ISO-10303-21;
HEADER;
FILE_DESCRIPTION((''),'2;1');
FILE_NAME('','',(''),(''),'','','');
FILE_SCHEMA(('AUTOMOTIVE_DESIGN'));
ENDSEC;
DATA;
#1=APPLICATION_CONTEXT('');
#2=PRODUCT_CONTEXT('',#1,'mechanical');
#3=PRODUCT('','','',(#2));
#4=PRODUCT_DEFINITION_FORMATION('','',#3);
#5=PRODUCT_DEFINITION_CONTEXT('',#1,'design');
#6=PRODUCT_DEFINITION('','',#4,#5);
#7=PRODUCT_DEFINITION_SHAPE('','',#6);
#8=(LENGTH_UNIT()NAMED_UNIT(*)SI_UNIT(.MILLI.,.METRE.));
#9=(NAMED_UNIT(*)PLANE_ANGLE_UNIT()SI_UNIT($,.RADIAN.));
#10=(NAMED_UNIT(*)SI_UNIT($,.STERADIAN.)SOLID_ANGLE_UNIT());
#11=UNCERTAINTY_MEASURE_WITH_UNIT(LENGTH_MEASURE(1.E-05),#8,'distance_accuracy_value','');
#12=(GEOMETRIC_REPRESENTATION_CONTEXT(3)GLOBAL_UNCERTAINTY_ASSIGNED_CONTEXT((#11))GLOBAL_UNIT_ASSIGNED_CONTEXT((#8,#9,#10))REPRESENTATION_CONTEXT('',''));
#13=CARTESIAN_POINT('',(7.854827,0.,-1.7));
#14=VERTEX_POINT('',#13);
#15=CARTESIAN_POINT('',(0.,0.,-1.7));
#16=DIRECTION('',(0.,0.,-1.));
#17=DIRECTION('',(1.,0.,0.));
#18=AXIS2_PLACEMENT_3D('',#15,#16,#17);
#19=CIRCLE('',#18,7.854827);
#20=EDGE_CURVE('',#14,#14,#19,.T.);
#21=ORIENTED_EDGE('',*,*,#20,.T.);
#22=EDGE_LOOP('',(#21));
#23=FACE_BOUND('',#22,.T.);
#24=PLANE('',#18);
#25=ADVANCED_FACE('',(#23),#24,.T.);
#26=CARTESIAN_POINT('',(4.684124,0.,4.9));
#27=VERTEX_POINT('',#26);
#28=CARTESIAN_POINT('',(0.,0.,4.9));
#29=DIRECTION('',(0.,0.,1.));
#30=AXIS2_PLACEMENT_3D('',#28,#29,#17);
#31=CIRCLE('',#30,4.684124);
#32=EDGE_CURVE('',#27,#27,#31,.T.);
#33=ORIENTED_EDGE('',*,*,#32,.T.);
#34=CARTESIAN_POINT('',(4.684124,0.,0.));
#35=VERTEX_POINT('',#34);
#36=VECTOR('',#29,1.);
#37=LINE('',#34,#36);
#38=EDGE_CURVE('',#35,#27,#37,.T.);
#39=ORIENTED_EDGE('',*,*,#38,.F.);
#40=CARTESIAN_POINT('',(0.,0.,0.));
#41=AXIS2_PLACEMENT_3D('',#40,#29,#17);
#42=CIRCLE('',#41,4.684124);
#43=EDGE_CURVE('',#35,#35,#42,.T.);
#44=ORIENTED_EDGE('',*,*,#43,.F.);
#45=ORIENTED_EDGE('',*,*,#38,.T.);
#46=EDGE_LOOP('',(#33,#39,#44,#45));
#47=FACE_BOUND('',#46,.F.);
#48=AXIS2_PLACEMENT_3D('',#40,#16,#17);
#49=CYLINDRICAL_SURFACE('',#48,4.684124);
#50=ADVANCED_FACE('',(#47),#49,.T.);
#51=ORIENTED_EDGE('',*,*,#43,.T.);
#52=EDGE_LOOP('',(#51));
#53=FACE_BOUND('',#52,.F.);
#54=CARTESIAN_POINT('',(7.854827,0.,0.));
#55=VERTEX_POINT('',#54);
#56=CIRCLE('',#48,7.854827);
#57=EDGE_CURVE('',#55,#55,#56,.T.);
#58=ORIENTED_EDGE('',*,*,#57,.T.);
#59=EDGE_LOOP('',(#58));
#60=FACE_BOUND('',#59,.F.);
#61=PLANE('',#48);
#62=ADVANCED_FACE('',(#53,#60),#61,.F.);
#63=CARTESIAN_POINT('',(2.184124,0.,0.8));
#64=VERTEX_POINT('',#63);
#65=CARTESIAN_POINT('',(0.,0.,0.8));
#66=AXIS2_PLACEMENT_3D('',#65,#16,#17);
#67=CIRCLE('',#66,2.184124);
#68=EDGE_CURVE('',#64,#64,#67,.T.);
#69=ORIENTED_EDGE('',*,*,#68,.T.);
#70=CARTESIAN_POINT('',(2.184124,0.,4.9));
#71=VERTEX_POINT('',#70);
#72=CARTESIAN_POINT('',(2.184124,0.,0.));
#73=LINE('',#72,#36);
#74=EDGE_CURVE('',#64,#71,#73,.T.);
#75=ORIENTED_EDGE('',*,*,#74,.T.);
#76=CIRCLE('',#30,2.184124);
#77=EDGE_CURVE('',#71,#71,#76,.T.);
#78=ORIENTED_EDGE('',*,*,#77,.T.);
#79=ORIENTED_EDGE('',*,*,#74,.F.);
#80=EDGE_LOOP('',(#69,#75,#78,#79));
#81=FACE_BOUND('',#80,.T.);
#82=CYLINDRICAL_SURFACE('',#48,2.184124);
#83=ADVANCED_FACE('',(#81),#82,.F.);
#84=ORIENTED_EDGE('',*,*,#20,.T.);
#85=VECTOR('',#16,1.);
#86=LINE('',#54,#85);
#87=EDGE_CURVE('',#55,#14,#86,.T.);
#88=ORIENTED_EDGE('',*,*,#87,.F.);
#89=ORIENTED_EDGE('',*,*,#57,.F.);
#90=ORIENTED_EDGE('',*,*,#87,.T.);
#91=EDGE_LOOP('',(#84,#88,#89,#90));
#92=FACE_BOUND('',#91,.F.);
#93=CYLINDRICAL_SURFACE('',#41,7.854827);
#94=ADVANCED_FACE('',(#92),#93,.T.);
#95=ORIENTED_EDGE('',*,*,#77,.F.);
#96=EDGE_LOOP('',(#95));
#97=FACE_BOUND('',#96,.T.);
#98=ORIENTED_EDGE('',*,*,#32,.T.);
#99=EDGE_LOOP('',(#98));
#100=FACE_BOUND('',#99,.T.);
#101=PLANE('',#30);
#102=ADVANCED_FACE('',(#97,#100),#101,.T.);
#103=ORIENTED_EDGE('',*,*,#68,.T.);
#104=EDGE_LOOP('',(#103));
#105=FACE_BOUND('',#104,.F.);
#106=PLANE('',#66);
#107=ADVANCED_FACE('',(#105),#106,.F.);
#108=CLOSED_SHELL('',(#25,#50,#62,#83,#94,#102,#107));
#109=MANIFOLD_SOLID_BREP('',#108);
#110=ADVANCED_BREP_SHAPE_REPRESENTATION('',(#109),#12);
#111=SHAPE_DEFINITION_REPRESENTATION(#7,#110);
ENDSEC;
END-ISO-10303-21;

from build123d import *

# Parameters (mm, degrees)
F0_R     = 4.6841242686
F1_DEPTH = 4.9
F2_R     = 7.8548268631
F3_DEPTH = 1.7
F4_T     = 2.5


# Not quite as in the source:
# - a shell that OpenCascade refuses in one call is made with other operations: the cavity is built on its own and cut out


with BuildPart() as f1:
    # F0 (on Top) → F1 (new body)
    with BuildSketch(Plane.XY):
        Circle(F0_R)
    extrude(amount=F1_DEPTH)

    # F2 (on face) → F3 (join)
    with BuildSketch(Plane(origin=(0, 0, 0), x_dir=(1, 0, 0), z_dir=(0, 0, -1))):
        Circle(F2_R)
    extrude(amount=F3_DEPTH)

    # F4: shell of thickness 2.5, made by hand


with BuildPart() as f4_core1:
    # F4_t2: copy of F1
    add(f1.part)

    # the walls: a layer under each face that stays
    f4_faces = [f4_core1.faces().sort_by_distance(p)[0] for p in [
        (-7.8548268631, 0, -0.85),
        (0, 0, -1.7),
        (-4.6841242686, 0, 2.45),
    ]]
    thicken(f4_faces, amount=-F4_T, mode=Mode.SUBTRACT)


with BuildPart() as f1_1:
    add(f1.part)

    # what is left inside the walls is the cavity
    f4_cavity = [f4_core1.part.solids().sort_by_distance(p)[0] for p in [
        (-2.159124, 0, 3.533333),
    ]]
    add(f4_cavity, mode=Mode.SUBTRACT)


solid = f1_1.part
